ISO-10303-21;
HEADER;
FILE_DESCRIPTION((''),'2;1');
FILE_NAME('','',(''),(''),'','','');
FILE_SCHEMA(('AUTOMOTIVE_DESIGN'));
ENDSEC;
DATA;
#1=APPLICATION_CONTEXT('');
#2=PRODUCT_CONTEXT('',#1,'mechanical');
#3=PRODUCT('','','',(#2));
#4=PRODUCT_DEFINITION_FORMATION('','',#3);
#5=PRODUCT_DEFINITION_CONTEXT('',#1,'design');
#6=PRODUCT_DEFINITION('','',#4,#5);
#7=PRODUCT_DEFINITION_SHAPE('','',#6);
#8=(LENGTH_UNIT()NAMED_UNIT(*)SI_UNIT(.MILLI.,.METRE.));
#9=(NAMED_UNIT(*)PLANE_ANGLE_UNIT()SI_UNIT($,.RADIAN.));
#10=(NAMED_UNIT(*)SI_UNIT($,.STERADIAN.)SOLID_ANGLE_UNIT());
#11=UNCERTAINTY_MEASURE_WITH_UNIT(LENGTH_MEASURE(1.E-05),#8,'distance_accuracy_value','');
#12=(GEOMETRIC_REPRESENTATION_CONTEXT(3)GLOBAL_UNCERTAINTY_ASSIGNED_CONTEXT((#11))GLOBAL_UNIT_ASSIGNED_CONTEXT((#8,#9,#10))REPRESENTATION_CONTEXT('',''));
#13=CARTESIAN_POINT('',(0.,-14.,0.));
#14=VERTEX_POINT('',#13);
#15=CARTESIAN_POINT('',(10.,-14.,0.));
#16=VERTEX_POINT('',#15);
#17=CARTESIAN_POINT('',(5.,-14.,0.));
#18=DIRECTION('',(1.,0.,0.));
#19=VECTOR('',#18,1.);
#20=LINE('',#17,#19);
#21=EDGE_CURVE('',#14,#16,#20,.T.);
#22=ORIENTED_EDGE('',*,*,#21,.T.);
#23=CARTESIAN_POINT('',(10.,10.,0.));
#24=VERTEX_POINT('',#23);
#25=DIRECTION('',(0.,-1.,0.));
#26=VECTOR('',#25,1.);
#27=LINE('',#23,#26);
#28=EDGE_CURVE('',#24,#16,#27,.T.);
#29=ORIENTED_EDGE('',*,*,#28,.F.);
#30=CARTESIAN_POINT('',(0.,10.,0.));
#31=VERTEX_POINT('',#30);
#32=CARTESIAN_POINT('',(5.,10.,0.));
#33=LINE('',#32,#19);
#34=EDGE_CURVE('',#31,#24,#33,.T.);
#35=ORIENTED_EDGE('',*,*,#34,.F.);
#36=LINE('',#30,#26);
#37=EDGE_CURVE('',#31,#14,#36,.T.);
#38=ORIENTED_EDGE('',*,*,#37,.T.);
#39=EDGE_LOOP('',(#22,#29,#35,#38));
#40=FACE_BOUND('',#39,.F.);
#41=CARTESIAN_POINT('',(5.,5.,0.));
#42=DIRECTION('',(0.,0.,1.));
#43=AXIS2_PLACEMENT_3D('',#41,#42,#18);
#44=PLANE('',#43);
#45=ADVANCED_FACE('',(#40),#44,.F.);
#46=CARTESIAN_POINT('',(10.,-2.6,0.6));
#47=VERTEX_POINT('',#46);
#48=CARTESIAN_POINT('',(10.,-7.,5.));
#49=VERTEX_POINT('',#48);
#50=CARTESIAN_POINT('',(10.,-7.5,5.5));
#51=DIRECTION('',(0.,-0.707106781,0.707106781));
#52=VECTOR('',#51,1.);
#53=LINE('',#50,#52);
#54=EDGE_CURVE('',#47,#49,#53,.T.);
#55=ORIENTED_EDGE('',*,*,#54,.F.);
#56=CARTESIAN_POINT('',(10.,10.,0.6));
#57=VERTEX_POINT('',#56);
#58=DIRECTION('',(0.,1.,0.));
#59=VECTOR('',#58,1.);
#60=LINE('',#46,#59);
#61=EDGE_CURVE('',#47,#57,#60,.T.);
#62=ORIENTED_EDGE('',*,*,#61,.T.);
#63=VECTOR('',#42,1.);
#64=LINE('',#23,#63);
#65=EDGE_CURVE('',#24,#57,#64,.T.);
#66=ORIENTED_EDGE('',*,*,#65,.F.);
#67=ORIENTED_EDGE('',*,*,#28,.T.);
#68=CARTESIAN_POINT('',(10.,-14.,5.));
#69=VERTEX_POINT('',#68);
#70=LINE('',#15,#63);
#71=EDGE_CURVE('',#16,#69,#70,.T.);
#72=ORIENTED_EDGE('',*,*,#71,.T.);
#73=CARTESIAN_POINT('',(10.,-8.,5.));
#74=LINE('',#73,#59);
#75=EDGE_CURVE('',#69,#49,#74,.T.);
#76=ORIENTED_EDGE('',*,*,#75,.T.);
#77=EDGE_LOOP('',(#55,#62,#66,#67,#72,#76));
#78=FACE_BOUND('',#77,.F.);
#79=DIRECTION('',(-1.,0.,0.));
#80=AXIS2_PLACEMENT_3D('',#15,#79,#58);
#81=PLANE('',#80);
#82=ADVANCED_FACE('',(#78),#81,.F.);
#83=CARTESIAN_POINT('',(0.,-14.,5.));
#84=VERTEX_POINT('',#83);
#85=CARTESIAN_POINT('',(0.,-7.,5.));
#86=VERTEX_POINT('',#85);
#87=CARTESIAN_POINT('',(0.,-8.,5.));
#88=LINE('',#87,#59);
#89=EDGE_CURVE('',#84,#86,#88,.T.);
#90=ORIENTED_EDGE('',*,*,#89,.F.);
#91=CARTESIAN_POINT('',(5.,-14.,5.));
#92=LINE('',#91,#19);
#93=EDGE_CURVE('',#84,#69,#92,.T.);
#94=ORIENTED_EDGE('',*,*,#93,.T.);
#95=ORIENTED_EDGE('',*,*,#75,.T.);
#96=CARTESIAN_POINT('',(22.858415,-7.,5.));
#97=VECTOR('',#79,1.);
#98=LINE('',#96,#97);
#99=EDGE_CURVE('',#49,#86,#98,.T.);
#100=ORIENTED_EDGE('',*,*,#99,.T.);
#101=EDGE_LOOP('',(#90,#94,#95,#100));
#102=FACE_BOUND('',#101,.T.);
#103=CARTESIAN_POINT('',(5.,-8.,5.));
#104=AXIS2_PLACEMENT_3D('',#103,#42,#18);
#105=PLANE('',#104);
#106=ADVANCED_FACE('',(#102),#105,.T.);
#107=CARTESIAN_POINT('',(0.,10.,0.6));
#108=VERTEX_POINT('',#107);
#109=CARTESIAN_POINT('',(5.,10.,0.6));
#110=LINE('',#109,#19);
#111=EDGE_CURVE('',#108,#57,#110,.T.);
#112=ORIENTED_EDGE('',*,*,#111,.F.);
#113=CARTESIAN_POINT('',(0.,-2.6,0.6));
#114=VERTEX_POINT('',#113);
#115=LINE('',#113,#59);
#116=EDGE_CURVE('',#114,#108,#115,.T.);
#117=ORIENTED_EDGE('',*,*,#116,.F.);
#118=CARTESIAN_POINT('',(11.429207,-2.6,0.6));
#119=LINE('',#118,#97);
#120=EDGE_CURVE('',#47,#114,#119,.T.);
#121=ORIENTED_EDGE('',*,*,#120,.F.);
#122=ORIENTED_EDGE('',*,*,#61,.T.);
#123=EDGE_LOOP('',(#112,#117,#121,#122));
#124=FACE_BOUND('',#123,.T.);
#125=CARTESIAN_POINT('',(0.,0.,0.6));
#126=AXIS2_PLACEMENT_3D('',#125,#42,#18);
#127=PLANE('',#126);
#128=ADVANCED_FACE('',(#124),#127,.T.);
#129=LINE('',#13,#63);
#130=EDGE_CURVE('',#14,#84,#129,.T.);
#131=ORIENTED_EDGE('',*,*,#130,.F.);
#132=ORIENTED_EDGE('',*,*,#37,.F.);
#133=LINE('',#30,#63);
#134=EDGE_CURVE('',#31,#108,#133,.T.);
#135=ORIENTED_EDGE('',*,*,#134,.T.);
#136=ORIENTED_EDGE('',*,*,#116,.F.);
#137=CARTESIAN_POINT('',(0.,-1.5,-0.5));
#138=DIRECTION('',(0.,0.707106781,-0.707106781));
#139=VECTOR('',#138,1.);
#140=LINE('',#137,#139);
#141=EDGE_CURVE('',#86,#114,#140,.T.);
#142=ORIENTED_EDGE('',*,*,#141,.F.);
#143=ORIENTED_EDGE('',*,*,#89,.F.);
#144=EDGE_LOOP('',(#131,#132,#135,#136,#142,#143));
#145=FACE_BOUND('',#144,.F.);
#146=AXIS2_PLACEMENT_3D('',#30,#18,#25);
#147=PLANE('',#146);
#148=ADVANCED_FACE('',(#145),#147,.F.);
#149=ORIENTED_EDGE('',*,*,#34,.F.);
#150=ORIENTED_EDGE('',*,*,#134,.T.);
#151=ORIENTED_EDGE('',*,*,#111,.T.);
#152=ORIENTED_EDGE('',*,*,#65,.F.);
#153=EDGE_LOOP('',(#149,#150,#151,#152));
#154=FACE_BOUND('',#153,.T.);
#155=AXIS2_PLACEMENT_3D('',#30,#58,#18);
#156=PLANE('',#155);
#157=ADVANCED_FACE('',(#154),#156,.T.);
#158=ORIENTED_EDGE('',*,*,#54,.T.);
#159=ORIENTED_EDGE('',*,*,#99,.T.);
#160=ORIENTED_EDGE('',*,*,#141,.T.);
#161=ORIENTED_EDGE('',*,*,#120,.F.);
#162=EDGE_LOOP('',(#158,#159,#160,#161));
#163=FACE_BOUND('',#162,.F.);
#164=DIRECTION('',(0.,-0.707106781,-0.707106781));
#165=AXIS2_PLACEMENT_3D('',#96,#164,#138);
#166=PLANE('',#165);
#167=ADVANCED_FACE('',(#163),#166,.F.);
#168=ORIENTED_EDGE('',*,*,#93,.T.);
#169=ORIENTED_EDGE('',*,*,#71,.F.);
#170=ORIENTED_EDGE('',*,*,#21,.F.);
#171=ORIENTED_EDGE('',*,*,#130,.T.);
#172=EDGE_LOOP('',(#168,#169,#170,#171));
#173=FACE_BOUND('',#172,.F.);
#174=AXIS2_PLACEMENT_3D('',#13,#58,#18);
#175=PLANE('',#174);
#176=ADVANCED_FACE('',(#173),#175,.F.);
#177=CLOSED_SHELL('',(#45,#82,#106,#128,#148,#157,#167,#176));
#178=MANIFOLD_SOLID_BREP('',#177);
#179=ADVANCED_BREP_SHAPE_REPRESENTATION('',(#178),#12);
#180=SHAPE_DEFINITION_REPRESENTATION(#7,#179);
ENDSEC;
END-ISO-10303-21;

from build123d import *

# Parameters (mm, degrees)
F0_W        = 10
F0_H        = 10
F0_H_2      = 2
F0_H_3      = 12
F1_DEPTH    = 0.6
F2_DEPTH    = 5
F3_T4_DEPTH = 35.7168298797


# Not quite as in the source:
# - a fillet or chamfer that OpenCascade refuses, or shapes differently, is made with other operations: its cross-section is extruded or revolved along the edge and cut away or added


with BuildPart() as f1:
    # F0 (on Top) → F1 (new body)
    with BuildSketch(Plane.XY):
        with Locations((5, 5)):
            Rectangle(F0_W, F0_H)
        with Locations((5, -1)):
            Rectangle(F0_W, F0_H_2)
        with Locations((5, -8)):
            Rectangle(F0_W, F0_H_3)
    extrude(amount=F1_DEPTH)

    # F0 (on Top) → F2 (join)
    with BuildSketch(Plane.XY):
        with Locations((5, -8)):
            Rectangle(F0_W, F0_H_3)
    extrude(amount=F2_DEPTH)

    # F3: chamfer of 5 on 1 edges, made by hand


with BuildPart() as f3_tool2:
    # F3_s3 → F3_t4 (new body)
    with BuildSketch(Plane.YZ.offset(22.8584149398)):
        Polygon((-7, 5), (-2, 0), (-2, 5), align=None)
    extrude(amount=-F3_T4_DEPTH)

    split(bisect_by=Plane.XY.offset(0.6), keep=Keep.TOP)


with BuildPart() as f1_1:
    add(f1.part)

    # F3_t1: cut F3_tool2
    add(f3_tool2.part, mode=Mode.SUBTRACT)


solid = f1_1.part
